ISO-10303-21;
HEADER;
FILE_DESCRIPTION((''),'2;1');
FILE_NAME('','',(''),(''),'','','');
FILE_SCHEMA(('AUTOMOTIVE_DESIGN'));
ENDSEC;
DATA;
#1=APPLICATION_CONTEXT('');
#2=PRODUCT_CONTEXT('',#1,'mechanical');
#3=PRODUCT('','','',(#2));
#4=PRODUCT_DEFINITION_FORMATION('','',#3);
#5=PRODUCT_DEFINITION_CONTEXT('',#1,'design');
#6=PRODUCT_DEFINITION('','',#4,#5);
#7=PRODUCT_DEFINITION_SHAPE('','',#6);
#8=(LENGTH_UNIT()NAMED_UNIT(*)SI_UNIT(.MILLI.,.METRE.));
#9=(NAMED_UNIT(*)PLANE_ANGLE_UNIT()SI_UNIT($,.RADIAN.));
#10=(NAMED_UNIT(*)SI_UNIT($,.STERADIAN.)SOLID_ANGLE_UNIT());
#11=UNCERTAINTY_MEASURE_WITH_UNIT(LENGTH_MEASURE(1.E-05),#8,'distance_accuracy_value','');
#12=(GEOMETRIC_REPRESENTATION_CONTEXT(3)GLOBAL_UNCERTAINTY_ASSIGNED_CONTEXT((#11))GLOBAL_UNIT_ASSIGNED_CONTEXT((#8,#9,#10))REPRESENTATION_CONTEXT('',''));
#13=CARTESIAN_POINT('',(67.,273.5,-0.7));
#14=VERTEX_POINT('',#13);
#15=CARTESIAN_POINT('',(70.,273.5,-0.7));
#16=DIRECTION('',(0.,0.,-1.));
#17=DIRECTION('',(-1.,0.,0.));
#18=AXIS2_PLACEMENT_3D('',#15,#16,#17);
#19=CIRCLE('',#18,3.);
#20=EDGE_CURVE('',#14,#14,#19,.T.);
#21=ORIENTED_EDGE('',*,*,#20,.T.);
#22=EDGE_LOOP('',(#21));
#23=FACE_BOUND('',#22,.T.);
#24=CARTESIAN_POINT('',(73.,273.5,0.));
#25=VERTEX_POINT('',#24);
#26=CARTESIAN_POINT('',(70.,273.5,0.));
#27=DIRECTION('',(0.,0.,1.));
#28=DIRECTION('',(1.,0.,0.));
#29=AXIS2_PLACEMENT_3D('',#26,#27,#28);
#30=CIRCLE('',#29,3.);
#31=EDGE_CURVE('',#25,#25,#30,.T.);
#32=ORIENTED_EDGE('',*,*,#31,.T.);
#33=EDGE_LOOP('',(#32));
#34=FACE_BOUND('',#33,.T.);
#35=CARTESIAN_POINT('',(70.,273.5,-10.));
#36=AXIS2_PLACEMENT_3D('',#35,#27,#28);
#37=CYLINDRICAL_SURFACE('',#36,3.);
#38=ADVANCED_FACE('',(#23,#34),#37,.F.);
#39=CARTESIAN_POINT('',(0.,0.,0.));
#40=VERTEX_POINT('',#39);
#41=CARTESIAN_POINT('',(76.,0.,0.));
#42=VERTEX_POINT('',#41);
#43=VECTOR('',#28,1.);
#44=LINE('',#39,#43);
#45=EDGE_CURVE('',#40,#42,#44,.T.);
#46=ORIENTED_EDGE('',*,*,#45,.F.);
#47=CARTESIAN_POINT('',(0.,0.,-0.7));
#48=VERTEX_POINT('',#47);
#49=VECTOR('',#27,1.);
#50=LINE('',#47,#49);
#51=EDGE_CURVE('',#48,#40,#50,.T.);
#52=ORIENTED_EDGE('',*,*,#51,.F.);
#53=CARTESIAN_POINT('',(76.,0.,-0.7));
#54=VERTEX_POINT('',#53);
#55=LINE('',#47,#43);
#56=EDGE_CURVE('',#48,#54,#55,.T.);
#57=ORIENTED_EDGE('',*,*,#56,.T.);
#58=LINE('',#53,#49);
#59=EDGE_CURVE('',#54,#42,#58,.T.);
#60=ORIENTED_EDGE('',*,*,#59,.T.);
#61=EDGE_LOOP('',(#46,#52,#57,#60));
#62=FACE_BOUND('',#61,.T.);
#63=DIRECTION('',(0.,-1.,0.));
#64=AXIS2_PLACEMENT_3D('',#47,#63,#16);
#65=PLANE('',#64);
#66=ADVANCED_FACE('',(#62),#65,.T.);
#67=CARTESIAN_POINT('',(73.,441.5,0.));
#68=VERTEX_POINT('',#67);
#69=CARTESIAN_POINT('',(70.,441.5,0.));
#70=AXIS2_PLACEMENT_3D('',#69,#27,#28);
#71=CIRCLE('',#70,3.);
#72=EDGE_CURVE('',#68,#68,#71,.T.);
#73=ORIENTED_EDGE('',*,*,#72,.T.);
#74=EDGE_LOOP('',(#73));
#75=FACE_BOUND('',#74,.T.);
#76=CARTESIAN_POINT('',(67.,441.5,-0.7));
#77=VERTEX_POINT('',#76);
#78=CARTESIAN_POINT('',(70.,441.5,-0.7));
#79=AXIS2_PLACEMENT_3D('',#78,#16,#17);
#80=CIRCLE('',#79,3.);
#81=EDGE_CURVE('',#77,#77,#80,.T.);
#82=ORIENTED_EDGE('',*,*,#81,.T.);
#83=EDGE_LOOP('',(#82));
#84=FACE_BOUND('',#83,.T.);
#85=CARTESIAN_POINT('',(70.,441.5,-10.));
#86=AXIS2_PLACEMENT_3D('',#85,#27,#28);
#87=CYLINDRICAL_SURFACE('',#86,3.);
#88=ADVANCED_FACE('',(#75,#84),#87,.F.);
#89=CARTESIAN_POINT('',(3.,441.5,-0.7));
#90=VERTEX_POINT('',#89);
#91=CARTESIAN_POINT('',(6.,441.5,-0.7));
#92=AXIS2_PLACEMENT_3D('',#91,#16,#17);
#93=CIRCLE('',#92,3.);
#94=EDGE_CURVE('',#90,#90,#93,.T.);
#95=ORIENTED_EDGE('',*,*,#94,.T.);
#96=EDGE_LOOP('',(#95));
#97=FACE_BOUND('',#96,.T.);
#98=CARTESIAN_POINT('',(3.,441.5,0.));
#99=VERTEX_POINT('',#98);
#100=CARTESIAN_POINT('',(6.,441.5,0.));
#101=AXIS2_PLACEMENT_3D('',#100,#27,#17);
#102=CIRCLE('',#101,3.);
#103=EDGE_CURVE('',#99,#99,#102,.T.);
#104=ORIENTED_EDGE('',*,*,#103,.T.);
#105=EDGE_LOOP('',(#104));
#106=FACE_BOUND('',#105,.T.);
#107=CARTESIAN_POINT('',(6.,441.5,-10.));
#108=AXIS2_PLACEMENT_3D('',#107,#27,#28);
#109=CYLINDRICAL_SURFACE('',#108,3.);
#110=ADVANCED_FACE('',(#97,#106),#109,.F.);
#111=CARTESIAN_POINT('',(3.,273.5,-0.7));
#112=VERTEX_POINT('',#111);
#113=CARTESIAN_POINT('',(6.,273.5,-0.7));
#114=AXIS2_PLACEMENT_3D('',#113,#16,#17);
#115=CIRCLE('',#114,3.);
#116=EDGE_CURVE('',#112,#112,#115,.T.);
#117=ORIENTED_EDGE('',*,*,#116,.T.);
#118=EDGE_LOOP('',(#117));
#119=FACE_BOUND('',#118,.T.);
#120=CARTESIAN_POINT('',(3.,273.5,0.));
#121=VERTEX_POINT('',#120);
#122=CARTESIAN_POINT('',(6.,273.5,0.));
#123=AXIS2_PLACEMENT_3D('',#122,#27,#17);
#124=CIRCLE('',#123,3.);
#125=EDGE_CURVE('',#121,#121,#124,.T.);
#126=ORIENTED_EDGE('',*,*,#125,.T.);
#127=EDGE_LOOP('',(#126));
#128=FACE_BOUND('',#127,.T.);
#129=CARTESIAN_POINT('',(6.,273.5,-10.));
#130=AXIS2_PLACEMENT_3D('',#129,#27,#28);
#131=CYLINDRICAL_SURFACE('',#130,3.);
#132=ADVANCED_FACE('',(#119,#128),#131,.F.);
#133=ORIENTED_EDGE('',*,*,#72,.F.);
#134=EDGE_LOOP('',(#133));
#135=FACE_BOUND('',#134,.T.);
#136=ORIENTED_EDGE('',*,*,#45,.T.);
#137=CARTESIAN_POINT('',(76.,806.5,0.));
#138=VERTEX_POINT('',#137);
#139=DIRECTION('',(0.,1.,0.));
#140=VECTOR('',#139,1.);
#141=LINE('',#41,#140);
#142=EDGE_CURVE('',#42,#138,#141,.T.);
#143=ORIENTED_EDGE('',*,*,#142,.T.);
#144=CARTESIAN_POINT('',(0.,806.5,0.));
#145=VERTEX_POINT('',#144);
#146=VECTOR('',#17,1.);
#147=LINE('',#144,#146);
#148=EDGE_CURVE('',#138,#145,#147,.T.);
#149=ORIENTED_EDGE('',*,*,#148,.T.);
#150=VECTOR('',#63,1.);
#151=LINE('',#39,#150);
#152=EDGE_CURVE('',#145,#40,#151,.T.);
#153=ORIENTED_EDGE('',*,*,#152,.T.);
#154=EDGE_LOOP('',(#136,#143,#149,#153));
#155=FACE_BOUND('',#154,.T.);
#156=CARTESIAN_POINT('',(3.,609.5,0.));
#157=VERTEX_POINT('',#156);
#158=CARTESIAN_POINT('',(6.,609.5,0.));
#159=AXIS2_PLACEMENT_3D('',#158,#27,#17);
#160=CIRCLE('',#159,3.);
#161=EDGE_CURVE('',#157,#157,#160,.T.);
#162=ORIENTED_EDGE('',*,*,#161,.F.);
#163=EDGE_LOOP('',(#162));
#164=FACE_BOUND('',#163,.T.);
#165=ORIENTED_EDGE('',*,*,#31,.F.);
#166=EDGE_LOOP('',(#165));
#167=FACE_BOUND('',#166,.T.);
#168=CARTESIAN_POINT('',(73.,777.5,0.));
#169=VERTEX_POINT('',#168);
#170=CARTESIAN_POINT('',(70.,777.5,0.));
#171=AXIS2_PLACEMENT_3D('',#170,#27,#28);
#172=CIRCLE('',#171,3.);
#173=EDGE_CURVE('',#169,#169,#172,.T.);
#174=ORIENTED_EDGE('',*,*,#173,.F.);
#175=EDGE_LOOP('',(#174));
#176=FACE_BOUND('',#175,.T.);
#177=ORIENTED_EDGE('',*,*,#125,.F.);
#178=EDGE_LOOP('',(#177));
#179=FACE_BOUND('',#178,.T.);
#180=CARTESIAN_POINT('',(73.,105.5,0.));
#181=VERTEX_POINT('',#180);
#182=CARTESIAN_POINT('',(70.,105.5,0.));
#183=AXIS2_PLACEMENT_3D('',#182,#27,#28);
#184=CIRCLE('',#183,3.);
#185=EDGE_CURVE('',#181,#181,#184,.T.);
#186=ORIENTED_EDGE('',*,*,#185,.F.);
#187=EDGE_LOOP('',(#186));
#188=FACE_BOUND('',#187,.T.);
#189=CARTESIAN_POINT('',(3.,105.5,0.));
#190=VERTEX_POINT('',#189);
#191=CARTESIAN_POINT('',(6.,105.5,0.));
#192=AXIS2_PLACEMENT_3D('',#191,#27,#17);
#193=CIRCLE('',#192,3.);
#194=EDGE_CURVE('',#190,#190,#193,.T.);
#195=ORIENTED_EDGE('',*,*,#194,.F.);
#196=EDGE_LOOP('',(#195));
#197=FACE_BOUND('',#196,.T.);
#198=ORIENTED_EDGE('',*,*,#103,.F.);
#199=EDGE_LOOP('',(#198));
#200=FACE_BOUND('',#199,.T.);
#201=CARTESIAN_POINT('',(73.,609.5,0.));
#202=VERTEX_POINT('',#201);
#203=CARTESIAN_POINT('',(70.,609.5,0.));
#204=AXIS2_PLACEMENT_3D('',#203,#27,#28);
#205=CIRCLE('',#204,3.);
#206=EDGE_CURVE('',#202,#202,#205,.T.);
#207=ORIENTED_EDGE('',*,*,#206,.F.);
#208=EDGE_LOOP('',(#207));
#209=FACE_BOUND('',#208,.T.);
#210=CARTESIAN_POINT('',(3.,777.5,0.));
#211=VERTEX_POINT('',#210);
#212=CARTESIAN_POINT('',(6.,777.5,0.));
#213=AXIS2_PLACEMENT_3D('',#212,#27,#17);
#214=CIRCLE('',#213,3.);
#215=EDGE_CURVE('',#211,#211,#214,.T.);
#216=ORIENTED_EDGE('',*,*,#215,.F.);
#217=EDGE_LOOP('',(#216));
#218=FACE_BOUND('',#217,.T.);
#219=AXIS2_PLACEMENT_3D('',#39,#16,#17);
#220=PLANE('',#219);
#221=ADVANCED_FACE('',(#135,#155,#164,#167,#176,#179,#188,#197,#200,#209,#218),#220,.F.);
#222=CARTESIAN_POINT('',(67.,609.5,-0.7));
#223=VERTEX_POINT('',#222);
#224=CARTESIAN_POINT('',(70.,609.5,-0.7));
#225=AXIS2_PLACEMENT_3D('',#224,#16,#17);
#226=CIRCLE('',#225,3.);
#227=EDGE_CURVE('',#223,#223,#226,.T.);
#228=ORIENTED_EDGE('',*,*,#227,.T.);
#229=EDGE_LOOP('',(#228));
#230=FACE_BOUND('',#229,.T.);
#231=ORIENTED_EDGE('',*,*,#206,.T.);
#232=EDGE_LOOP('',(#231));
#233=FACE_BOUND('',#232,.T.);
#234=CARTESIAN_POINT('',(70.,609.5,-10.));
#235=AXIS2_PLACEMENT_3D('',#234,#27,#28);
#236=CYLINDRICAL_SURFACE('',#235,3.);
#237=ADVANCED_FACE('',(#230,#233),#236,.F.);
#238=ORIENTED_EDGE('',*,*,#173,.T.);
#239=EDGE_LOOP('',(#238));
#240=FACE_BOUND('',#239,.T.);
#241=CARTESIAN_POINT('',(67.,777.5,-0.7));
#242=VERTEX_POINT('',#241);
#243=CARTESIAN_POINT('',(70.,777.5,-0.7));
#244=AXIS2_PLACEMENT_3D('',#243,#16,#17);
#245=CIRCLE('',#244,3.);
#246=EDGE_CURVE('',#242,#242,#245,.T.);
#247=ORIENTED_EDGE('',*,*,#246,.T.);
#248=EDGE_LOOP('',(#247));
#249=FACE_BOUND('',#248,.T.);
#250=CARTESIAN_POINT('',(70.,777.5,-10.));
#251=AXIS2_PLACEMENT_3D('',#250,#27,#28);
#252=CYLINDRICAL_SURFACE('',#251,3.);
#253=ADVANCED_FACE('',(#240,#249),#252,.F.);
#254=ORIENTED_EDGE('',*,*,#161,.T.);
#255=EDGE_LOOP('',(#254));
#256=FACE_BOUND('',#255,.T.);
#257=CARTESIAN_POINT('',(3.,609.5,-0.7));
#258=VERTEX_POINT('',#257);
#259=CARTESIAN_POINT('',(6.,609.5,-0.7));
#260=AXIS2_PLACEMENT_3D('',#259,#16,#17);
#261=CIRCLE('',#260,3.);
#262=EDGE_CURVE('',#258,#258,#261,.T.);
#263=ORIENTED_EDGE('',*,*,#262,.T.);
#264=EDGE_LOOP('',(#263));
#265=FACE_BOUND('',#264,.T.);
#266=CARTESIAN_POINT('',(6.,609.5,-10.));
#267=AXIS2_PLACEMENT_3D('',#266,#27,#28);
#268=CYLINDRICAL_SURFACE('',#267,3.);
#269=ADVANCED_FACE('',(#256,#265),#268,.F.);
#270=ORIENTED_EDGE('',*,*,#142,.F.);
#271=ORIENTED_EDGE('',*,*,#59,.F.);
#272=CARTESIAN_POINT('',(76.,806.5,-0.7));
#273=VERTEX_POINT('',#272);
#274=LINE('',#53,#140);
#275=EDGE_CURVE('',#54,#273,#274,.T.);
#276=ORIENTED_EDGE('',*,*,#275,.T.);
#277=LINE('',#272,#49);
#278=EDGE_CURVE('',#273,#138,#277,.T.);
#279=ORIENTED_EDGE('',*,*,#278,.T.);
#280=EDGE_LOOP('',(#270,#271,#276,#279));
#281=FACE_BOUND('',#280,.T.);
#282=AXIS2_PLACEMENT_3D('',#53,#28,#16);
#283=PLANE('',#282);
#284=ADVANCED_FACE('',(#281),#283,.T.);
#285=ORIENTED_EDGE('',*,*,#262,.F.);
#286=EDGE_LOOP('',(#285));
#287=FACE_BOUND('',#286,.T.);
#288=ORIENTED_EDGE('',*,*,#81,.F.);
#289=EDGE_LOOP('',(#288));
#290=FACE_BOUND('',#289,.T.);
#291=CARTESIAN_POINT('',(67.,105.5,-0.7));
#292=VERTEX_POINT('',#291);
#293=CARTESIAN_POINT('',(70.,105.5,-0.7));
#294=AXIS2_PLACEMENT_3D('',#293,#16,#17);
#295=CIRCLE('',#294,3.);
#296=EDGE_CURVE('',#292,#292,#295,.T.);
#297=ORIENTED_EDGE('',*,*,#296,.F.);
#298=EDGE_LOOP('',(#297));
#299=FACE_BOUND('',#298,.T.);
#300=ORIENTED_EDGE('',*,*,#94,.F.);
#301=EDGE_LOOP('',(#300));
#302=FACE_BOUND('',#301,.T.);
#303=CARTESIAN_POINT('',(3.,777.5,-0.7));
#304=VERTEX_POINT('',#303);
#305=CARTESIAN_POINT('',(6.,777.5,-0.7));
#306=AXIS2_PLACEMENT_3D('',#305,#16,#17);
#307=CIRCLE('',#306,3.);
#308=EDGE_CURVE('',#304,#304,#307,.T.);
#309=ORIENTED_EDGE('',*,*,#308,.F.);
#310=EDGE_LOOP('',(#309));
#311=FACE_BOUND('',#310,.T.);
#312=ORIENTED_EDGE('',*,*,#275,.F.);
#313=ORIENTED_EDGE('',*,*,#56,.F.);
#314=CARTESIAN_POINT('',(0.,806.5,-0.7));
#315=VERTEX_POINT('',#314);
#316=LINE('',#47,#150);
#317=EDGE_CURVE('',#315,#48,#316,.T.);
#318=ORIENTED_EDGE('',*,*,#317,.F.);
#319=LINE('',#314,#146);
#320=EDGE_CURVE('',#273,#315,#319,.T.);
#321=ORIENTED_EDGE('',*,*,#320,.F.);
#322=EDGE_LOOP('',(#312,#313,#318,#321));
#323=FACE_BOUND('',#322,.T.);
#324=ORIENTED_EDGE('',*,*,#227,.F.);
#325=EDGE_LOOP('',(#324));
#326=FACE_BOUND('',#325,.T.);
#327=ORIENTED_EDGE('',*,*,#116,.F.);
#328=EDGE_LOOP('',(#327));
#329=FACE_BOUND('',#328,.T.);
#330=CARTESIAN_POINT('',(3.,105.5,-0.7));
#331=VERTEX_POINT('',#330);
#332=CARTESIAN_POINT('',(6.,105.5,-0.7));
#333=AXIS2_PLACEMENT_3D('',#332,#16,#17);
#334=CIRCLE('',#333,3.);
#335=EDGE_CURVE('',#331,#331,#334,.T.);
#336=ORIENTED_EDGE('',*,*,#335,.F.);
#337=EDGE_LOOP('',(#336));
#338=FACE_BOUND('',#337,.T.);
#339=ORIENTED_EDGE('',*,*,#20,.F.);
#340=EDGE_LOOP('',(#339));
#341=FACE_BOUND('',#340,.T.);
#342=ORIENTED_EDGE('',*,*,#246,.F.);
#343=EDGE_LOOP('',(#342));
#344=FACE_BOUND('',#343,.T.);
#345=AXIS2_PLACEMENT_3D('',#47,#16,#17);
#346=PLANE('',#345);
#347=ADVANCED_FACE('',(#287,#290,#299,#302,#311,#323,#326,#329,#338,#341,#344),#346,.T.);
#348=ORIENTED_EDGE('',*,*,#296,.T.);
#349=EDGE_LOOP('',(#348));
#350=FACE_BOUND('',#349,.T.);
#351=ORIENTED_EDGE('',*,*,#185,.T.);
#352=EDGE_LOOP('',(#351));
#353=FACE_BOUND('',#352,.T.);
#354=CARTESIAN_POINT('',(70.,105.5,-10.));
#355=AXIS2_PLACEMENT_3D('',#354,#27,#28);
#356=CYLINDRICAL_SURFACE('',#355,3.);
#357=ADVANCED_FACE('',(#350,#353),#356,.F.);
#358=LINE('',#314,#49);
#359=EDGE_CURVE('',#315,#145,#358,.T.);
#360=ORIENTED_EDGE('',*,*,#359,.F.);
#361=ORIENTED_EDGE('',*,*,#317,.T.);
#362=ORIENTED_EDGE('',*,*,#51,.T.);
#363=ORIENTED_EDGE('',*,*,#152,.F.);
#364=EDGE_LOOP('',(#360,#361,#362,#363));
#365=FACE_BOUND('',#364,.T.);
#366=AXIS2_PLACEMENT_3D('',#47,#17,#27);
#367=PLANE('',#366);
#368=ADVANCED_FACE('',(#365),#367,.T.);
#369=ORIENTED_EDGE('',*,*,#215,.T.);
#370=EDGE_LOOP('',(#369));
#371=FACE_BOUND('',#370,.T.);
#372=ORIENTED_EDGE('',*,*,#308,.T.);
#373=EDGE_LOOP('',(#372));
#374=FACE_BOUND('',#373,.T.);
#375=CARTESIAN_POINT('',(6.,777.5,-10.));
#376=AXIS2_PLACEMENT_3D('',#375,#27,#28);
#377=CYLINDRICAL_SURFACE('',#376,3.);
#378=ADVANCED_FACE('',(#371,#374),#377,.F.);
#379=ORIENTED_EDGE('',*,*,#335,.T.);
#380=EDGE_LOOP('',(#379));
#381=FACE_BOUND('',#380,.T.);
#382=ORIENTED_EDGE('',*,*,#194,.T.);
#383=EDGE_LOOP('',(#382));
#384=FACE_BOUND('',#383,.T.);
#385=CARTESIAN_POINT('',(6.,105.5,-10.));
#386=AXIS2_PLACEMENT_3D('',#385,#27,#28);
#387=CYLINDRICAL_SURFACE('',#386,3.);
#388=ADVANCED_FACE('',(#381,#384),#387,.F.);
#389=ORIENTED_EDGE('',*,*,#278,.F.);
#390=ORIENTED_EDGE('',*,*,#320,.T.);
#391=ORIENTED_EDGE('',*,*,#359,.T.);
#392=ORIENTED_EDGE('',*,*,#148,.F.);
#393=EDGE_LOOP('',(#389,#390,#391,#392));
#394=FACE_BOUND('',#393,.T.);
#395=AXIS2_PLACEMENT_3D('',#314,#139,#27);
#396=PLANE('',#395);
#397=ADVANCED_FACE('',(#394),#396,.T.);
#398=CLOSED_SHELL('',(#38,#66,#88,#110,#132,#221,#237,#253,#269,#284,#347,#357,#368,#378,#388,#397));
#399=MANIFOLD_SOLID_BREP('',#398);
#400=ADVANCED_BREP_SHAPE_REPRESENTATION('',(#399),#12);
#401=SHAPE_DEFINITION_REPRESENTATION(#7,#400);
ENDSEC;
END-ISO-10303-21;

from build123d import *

# Parameters (mm, degrees)
SKETCH1_W          = 76
SKETCH1_H          = 806.5
BASE_FLANGE1_DEPTH = 0.7
SKETCH2_R          = 3
CUT_EXTRUDE1_DEPTH = 10


# Sheet-metal steps are written as plain solids
with BuildPart() as part:
    # Sketch1 → Base-Flange1 (new body)
    with BuildSketch(Plane.XY):
        with Locations((38, 403.25)):
            Rectangle(SKETCH1_W, SKETCH1_H)
    extrude(amount=-BASE_FLANGE1_DEPTH)

    # Sketch2 → Cut-Extrude1 (cut)
    with BuildSketch(Plane.XY):
        with Locations((70, 777.5)):
            Circle(SKETCH2_R)
        with Locations((70, 609.5)):
            Circle(SKETCH2_R)
        with Locations((70, 441.5)):
            Circle(SKETCH2_R)
        with Locations((70, 273.5)):
            Circle(SKETCH2_R)
        with Locations((70, 105.5)):
            Circle(SKETCH2_R)
        with Locations(Location((6, 105.5, 0), (0, 0, 180))):
            Circle(SKETCH2_R)
        with Locations(Location((6, 273.5, 0), (0, 0, 180))):
            Circle(SKETCH2_R)
        with Locations(Location((6, 441.5, 0), (0, 0, 180))):
            Circle(SKETCH2_R)
        with Locations(Location((6, 609.5, 0), (0, 0, 180))):
            Circle(SKETCH2_R)
        with Locations(Location((6, 777.5, 0), (0, 0, 180))):
            Circle(SKETCH2_R)
    extrude(amount=-CUT_EXTRUDE1_DEPTH, mode=Mode.SUBTRACT)


solid = part.part
